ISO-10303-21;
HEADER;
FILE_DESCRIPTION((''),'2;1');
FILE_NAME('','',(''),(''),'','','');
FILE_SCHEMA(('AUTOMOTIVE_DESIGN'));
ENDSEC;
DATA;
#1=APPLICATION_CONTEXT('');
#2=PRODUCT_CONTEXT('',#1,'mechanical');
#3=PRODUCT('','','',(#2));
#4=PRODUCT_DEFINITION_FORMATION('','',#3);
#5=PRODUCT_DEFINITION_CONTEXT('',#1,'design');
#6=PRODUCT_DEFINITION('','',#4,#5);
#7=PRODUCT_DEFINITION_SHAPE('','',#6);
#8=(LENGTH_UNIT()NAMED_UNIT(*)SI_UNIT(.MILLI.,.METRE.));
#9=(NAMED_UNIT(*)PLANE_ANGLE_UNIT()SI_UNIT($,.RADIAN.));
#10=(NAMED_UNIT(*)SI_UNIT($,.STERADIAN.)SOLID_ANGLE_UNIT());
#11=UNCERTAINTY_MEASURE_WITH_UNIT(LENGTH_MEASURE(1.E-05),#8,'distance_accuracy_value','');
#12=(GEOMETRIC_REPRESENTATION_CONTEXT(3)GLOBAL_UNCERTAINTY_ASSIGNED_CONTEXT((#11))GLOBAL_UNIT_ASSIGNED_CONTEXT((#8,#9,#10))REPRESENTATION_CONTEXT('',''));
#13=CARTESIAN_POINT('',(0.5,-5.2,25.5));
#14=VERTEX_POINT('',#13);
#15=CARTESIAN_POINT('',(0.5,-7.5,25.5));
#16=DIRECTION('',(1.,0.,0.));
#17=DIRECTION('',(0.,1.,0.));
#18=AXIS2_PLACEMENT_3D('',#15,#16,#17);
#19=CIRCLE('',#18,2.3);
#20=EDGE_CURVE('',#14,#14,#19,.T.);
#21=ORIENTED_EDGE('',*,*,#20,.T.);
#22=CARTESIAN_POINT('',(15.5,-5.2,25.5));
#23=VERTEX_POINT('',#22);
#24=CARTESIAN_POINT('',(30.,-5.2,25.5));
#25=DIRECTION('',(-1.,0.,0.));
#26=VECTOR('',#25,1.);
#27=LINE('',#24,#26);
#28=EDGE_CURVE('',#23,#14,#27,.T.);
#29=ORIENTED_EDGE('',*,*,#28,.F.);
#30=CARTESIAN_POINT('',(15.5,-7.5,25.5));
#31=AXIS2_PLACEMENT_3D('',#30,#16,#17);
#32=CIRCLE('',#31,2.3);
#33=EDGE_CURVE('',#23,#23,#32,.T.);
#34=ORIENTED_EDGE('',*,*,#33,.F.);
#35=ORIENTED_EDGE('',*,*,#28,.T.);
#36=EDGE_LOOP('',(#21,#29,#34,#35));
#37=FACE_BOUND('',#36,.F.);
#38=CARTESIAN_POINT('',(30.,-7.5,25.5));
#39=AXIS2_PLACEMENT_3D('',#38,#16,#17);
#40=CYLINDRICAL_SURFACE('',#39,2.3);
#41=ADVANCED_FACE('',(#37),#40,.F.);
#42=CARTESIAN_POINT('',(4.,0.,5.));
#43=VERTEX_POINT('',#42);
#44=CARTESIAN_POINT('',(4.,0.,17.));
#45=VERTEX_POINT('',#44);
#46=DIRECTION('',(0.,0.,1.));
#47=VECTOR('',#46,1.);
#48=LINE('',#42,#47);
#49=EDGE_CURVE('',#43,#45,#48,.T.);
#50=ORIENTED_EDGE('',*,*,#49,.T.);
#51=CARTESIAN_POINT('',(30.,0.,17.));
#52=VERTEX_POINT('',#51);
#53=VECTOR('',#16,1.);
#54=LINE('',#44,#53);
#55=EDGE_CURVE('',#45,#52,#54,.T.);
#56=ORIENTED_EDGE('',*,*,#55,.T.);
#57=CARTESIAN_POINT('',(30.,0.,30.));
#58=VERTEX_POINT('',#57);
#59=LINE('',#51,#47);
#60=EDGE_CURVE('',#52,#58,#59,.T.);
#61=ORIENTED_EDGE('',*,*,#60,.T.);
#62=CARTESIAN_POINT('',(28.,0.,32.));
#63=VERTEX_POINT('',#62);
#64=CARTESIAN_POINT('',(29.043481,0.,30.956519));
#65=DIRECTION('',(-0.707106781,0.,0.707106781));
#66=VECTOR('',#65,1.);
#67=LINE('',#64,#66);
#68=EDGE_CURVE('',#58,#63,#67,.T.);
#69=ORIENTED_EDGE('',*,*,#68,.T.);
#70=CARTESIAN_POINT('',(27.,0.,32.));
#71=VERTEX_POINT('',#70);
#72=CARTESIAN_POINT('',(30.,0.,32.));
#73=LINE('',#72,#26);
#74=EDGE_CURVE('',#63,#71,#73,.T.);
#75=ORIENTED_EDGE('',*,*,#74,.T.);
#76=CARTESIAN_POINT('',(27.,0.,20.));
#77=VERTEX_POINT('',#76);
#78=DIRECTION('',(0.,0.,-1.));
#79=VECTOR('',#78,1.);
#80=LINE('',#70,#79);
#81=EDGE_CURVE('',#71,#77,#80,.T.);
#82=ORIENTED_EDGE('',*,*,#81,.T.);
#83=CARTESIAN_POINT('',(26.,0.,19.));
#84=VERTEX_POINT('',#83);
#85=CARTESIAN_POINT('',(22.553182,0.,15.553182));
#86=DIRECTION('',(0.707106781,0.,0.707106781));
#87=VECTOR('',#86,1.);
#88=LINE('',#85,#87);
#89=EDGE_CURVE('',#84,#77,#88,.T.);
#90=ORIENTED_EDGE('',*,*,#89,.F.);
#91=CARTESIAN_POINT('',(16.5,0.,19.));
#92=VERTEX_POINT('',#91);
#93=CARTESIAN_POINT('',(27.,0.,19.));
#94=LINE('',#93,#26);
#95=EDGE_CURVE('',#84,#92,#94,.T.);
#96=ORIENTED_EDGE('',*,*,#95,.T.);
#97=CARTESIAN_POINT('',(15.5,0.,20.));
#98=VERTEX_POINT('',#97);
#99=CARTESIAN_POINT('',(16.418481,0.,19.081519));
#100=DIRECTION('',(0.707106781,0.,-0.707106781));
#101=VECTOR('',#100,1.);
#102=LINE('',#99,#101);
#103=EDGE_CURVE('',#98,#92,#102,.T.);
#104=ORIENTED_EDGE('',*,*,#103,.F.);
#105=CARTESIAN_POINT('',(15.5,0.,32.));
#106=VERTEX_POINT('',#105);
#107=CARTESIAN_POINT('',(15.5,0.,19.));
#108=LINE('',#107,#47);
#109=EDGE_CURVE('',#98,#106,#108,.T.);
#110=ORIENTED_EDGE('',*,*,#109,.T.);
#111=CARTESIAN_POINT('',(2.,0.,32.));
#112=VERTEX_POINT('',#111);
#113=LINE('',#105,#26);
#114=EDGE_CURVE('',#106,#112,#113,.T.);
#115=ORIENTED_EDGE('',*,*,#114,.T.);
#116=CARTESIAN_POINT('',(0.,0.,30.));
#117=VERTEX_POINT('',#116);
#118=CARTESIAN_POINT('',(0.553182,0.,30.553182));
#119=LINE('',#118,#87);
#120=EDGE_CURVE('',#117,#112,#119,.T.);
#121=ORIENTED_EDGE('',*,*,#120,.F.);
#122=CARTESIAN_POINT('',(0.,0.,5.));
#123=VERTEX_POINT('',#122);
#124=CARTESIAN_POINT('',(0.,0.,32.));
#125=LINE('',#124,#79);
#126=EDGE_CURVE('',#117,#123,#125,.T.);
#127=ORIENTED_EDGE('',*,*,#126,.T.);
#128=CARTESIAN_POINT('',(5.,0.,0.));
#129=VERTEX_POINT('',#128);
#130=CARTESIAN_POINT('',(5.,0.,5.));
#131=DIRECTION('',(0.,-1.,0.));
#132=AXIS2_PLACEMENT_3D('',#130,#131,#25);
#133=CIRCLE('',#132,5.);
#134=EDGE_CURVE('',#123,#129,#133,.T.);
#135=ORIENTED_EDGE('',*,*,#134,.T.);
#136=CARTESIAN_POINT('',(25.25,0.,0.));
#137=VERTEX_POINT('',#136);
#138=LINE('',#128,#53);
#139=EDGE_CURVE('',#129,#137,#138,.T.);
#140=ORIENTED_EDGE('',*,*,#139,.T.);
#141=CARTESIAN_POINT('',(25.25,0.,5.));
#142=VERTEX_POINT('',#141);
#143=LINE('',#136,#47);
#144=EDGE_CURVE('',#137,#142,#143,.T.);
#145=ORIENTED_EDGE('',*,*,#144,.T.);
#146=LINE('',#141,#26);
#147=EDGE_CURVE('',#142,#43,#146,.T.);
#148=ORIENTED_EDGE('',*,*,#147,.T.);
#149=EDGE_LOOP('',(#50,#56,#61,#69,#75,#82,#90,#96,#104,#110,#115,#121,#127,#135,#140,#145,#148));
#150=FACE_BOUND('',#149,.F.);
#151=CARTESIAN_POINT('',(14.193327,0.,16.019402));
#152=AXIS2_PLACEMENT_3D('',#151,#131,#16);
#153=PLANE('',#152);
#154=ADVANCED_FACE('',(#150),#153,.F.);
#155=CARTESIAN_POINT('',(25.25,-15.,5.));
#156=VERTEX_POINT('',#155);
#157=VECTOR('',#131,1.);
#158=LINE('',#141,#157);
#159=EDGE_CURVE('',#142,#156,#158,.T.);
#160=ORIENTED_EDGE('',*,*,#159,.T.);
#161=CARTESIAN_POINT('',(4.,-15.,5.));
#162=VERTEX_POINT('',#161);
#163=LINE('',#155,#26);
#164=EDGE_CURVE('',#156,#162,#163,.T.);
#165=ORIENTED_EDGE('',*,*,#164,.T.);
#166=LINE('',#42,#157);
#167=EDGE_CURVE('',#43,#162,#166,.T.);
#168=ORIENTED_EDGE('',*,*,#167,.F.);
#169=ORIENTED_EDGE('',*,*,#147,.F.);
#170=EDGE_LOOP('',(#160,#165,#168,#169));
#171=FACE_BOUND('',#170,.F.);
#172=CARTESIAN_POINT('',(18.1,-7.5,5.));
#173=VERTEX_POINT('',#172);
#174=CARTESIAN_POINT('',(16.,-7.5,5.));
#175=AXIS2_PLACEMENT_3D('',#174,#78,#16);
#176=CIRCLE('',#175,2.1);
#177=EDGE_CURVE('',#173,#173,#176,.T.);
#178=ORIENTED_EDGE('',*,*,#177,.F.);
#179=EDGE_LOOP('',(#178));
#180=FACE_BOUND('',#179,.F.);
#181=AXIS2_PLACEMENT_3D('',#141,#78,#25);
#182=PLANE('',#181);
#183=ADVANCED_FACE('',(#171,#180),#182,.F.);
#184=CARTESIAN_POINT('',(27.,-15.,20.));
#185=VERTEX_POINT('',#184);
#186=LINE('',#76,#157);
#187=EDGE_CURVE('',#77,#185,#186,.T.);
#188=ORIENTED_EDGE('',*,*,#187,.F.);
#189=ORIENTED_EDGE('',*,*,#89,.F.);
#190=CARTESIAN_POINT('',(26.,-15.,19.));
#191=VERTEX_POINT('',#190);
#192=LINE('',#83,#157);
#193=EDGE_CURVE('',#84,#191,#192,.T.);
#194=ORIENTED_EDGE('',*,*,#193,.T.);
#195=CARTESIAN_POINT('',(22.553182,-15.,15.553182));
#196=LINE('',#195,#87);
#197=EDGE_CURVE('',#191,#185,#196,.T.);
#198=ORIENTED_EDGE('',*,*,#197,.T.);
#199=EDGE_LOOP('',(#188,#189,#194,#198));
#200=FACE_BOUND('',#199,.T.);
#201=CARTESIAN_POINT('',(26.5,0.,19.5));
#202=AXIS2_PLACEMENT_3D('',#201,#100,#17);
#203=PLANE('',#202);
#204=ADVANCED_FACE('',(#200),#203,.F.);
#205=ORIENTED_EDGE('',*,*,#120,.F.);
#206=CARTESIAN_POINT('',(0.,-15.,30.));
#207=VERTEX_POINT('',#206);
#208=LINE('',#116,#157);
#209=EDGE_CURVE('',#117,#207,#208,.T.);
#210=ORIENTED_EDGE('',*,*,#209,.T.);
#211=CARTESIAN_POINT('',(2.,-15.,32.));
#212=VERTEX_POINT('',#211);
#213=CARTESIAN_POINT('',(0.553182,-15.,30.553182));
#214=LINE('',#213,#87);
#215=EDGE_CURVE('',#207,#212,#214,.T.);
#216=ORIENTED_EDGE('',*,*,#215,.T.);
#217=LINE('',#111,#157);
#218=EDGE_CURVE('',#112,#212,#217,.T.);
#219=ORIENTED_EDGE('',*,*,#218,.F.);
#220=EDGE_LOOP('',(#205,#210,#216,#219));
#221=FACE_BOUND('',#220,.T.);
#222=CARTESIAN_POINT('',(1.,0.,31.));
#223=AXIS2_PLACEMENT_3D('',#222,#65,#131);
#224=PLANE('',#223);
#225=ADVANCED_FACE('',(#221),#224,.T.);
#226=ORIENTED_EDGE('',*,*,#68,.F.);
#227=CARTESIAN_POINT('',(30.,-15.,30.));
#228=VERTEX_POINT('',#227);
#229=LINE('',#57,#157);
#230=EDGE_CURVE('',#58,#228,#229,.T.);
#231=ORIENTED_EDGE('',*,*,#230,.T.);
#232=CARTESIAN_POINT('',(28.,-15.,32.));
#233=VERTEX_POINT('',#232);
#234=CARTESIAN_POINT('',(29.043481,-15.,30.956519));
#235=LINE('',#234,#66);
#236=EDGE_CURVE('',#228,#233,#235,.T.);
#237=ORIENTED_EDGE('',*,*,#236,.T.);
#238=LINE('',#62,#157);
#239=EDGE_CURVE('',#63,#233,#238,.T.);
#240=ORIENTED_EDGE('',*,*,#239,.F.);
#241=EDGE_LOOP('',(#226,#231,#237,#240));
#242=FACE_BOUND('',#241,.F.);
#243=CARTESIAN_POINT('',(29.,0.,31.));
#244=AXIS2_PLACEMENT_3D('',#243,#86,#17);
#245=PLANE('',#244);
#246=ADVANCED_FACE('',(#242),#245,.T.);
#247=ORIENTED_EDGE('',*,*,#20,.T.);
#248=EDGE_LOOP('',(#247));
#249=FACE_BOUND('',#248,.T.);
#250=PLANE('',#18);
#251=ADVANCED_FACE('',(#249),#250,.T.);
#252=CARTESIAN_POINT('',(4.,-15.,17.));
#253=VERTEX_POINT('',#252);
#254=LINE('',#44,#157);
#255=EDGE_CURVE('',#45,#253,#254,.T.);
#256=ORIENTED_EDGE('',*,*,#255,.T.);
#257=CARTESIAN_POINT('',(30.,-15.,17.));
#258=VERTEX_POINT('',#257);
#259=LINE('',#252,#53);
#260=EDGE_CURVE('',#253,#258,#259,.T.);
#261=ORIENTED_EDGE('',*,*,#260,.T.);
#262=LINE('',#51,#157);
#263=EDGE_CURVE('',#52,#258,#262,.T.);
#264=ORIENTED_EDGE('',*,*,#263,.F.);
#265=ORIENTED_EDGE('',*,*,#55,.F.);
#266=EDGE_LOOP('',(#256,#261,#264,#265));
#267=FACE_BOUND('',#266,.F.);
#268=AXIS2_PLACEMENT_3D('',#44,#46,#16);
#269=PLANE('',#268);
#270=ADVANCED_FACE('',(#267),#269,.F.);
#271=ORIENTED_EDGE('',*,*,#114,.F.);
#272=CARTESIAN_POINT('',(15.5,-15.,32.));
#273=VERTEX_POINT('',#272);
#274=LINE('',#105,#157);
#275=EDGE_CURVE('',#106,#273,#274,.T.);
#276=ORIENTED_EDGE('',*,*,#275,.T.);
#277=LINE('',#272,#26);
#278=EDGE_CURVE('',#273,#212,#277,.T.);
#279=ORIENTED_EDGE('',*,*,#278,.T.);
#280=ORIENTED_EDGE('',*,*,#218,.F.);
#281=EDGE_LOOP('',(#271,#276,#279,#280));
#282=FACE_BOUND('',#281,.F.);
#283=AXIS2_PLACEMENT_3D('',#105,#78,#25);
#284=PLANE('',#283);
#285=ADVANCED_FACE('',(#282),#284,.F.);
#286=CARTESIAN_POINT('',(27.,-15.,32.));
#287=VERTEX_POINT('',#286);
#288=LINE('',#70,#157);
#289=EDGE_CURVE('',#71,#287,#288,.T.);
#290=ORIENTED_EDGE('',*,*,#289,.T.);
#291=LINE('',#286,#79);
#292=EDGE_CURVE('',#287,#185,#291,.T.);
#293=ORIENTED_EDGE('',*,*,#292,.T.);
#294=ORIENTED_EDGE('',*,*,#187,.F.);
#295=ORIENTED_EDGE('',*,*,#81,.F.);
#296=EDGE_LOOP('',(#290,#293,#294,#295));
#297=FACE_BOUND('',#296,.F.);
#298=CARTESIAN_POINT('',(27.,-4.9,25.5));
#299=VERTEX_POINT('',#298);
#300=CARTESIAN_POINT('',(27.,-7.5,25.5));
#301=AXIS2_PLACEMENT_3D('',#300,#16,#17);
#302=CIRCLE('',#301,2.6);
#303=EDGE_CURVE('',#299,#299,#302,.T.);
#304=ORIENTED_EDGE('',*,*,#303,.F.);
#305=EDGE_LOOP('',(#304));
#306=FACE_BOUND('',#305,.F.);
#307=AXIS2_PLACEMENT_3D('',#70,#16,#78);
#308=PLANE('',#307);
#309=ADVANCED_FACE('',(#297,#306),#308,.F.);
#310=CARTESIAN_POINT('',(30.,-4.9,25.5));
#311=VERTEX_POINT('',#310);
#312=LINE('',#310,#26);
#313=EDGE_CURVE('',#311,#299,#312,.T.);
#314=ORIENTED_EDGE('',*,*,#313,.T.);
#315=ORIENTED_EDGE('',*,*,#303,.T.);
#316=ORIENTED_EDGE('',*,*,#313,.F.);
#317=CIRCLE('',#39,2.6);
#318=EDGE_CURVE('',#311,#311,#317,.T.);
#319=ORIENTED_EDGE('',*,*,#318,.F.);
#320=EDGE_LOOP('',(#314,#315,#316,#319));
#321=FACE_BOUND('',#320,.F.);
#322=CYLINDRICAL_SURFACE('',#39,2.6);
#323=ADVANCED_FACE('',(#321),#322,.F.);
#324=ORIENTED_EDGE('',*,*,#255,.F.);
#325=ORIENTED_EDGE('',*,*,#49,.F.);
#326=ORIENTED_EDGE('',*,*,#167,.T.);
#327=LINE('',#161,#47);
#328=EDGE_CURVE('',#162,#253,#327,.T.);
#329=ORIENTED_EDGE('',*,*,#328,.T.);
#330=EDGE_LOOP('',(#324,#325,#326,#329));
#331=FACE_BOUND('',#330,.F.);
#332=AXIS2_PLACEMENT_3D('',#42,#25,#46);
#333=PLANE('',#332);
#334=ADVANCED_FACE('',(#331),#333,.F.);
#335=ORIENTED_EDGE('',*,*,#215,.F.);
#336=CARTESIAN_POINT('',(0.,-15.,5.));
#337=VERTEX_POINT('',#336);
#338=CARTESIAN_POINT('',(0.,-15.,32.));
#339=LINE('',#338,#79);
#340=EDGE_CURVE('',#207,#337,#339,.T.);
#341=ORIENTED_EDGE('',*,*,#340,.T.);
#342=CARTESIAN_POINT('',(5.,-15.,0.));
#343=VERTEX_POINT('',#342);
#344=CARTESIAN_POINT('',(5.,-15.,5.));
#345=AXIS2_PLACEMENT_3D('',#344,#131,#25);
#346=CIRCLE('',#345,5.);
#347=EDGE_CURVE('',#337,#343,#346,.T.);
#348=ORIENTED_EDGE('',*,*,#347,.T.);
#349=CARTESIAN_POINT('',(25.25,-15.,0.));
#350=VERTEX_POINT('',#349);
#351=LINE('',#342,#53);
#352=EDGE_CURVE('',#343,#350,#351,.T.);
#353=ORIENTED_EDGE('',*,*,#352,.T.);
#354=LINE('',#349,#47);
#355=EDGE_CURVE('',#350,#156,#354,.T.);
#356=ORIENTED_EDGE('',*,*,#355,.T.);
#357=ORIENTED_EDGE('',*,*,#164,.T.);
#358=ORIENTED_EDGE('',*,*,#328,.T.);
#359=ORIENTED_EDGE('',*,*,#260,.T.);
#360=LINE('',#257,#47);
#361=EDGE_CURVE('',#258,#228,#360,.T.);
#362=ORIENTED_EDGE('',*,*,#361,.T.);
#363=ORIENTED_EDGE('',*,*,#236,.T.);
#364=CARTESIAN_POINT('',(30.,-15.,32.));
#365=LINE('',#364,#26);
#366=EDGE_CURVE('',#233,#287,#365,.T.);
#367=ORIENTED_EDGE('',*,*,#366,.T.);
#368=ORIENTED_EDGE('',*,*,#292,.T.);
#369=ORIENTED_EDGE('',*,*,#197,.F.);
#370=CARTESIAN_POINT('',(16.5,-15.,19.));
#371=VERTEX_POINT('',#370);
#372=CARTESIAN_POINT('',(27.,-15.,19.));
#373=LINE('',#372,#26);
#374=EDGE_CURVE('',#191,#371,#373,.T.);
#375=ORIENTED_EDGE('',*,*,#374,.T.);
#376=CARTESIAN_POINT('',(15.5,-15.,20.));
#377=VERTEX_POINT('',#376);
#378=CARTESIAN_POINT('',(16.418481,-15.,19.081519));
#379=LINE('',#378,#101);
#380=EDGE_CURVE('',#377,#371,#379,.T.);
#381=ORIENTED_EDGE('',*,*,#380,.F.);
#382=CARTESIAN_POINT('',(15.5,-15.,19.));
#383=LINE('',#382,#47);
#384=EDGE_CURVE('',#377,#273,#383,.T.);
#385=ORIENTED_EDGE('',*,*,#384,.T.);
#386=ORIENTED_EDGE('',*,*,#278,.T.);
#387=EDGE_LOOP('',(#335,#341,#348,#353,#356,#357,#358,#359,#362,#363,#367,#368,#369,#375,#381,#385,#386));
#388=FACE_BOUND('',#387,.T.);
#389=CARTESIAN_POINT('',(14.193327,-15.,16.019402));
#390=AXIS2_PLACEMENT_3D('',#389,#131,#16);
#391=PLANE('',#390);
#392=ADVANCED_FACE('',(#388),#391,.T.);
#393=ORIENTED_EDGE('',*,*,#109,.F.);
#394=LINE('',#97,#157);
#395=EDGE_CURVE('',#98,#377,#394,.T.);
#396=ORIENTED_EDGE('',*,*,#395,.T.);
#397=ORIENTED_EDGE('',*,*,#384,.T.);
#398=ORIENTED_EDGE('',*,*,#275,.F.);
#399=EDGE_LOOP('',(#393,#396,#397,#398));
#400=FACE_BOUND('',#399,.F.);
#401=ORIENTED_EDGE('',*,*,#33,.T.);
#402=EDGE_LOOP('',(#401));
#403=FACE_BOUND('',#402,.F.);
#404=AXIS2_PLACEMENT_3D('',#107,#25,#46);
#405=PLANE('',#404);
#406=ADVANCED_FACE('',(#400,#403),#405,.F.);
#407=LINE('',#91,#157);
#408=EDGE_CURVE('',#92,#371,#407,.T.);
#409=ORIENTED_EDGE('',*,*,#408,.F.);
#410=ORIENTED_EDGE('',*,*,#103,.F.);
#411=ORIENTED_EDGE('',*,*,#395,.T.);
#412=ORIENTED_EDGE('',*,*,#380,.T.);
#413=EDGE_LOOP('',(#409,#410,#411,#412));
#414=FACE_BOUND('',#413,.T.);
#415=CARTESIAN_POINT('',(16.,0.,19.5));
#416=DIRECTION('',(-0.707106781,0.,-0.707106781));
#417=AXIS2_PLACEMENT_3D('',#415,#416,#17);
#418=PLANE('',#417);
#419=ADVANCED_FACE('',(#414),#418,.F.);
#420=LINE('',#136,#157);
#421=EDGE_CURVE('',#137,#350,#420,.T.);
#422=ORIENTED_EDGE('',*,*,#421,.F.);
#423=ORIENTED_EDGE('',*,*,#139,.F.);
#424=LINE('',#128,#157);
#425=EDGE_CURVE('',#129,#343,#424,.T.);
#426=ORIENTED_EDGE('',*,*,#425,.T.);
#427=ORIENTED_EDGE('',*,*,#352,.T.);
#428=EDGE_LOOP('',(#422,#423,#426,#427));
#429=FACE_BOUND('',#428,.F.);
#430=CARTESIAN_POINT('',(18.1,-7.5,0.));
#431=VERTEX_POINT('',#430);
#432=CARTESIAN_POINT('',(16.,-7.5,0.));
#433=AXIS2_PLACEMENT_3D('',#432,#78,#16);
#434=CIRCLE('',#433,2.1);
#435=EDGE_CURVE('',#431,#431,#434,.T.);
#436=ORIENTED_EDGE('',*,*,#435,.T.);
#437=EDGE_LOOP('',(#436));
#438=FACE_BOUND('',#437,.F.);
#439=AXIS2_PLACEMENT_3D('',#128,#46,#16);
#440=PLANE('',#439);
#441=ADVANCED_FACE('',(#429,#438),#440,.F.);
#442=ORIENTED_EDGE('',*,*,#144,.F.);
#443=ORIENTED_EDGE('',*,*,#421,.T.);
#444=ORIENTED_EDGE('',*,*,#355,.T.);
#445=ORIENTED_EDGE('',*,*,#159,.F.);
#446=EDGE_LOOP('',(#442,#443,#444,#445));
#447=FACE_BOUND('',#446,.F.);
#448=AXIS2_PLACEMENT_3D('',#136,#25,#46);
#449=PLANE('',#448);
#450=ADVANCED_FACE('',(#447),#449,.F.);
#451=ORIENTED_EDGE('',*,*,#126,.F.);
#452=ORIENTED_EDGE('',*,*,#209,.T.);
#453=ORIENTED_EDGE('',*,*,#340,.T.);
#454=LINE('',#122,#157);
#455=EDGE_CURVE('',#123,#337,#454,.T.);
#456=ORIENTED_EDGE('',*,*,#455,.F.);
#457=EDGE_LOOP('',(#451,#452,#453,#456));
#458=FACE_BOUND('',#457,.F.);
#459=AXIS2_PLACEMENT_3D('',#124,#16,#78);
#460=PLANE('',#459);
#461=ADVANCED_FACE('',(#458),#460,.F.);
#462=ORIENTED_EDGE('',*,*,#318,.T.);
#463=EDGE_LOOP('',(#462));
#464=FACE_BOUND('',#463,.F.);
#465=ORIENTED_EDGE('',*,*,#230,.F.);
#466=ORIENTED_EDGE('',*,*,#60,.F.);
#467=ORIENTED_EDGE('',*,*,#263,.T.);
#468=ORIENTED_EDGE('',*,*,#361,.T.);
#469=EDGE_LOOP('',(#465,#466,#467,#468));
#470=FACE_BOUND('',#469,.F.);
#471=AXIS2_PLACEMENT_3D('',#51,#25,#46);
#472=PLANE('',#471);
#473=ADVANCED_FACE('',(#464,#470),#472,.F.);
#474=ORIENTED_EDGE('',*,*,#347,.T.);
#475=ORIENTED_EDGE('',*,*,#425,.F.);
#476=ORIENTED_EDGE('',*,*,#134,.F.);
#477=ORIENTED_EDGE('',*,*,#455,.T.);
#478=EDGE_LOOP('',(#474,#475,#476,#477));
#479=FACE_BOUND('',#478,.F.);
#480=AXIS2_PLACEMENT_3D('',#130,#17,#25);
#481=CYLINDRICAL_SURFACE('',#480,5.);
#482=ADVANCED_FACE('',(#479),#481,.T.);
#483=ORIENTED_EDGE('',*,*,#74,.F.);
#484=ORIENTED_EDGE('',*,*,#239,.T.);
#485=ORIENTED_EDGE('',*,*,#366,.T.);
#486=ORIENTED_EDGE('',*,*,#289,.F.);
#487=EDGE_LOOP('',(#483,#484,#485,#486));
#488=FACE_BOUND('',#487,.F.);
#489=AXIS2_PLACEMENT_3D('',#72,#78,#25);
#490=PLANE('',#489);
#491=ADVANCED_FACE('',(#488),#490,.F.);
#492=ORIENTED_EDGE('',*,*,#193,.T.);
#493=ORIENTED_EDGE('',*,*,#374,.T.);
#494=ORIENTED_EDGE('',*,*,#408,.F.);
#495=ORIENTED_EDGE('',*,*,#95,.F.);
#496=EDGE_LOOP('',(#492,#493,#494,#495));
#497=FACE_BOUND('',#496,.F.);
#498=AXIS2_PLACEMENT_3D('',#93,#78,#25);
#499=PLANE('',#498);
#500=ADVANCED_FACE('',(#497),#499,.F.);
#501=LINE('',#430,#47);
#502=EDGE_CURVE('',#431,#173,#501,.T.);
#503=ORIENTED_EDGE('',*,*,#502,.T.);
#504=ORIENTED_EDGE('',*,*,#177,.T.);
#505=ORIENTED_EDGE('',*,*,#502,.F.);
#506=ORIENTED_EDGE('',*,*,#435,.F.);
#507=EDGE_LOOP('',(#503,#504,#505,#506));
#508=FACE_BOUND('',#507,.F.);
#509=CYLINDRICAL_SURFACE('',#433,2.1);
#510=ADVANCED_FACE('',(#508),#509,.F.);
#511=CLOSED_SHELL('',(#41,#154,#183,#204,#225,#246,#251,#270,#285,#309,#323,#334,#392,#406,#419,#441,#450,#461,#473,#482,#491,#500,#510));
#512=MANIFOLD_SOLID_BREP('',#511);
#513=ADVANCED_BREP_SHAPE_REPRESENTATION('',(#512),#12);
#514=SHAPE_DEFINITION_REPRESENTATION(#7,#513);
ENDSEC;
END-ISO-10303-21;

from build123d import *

# Parameters (mm, degrees)
F1_DEPTH = 15
F2_SIZE  = 2
F3_SIZE  = 1
F4_R     = 2.1
F5_DEPTH = 5
F6_R     = 2.3
F7_DEPTH = 29.5
F8_R     = 2.6
F8_R_2   = 2.3
F9_DEPTH = 3


with BuildPart() as f1:
    # F0 (on Front) → F1 (new body)
    with BuildSketch(Plane.XZ):
        with BuildLine():
            Line((0, 32), (0, 5))
            ThreePointArc((0, 5), (1.4644660941, 1.4644660941), (5, 0))
            Line((5, 0), (25.25, 0))
            Line((25.25, 0), (25.25, 5))
            Line((25.25, 5), (4, 5))
            Line((4, 5), (4, 17))
            Line((4, 17), (30, 17))
            Line((30, 17), (30, 32))
            Line((30, 32), (27, 32))
            Line((27, 32), (27, 19))
            Line((27, 19), (15.5, 19))
            Line((15.5, 19), (15.5, 32))
            Line((15.5, 32), (0, 32))
        make_face()
    extrude(amount=F1_DEPTH)

    # F2
    f2_edges = [f1.edges().sort_by_distance(p)[0] for p in [
        (0, -7.5, 32),
        (30, -7.5, 32),
    ]]
    chamfer(f2_edges, length=F2_SIZE)

    # F3
    f3_edges = [f1.edges().sort_by_distance(p)[0] for p in [
        (15.5, -7.5, 19),
        (27, -7.5, 19),
    ]]
    chamfer(f3_edges, length=F3_SIZE)

    # F4 (on face) → F5 (cut, through all)
    with BuildSketch(Plane(origin=(0, 0, 0), x_dir=(1, 0, 0), z_dir=(0, 0, -1))):
        with Locations((16, 7.5)):
            Circle(F4_R)
    extrude(amount=-F5_DEPTH, mode=Mode.SUBTRACT)

    # F6 (on face) → F7 (cut)
    with BuildSketch(Plane.YZ.offset(30)):
        with Locations((-7.5, 25.5)):
            Circle(F6_R)
    extrude(amount=-F7_DEPTH, mode=Mode.SUBTRACT)

    # F8 (on face) → F9 (cut, through all)
    with BuildSketch(Plane.YZ.offset(30)):
        with Locations((-7.5, 25.5)):
            Circle(F8_R)
        with Locations((-7.5, 25.5)):
            Circle(F8_R_2, mode=Mode.SUBTRACT)
    extrude(amount=-F9_DEPTH, mode=Mode.SUBTRACT)


solid = f1.part
